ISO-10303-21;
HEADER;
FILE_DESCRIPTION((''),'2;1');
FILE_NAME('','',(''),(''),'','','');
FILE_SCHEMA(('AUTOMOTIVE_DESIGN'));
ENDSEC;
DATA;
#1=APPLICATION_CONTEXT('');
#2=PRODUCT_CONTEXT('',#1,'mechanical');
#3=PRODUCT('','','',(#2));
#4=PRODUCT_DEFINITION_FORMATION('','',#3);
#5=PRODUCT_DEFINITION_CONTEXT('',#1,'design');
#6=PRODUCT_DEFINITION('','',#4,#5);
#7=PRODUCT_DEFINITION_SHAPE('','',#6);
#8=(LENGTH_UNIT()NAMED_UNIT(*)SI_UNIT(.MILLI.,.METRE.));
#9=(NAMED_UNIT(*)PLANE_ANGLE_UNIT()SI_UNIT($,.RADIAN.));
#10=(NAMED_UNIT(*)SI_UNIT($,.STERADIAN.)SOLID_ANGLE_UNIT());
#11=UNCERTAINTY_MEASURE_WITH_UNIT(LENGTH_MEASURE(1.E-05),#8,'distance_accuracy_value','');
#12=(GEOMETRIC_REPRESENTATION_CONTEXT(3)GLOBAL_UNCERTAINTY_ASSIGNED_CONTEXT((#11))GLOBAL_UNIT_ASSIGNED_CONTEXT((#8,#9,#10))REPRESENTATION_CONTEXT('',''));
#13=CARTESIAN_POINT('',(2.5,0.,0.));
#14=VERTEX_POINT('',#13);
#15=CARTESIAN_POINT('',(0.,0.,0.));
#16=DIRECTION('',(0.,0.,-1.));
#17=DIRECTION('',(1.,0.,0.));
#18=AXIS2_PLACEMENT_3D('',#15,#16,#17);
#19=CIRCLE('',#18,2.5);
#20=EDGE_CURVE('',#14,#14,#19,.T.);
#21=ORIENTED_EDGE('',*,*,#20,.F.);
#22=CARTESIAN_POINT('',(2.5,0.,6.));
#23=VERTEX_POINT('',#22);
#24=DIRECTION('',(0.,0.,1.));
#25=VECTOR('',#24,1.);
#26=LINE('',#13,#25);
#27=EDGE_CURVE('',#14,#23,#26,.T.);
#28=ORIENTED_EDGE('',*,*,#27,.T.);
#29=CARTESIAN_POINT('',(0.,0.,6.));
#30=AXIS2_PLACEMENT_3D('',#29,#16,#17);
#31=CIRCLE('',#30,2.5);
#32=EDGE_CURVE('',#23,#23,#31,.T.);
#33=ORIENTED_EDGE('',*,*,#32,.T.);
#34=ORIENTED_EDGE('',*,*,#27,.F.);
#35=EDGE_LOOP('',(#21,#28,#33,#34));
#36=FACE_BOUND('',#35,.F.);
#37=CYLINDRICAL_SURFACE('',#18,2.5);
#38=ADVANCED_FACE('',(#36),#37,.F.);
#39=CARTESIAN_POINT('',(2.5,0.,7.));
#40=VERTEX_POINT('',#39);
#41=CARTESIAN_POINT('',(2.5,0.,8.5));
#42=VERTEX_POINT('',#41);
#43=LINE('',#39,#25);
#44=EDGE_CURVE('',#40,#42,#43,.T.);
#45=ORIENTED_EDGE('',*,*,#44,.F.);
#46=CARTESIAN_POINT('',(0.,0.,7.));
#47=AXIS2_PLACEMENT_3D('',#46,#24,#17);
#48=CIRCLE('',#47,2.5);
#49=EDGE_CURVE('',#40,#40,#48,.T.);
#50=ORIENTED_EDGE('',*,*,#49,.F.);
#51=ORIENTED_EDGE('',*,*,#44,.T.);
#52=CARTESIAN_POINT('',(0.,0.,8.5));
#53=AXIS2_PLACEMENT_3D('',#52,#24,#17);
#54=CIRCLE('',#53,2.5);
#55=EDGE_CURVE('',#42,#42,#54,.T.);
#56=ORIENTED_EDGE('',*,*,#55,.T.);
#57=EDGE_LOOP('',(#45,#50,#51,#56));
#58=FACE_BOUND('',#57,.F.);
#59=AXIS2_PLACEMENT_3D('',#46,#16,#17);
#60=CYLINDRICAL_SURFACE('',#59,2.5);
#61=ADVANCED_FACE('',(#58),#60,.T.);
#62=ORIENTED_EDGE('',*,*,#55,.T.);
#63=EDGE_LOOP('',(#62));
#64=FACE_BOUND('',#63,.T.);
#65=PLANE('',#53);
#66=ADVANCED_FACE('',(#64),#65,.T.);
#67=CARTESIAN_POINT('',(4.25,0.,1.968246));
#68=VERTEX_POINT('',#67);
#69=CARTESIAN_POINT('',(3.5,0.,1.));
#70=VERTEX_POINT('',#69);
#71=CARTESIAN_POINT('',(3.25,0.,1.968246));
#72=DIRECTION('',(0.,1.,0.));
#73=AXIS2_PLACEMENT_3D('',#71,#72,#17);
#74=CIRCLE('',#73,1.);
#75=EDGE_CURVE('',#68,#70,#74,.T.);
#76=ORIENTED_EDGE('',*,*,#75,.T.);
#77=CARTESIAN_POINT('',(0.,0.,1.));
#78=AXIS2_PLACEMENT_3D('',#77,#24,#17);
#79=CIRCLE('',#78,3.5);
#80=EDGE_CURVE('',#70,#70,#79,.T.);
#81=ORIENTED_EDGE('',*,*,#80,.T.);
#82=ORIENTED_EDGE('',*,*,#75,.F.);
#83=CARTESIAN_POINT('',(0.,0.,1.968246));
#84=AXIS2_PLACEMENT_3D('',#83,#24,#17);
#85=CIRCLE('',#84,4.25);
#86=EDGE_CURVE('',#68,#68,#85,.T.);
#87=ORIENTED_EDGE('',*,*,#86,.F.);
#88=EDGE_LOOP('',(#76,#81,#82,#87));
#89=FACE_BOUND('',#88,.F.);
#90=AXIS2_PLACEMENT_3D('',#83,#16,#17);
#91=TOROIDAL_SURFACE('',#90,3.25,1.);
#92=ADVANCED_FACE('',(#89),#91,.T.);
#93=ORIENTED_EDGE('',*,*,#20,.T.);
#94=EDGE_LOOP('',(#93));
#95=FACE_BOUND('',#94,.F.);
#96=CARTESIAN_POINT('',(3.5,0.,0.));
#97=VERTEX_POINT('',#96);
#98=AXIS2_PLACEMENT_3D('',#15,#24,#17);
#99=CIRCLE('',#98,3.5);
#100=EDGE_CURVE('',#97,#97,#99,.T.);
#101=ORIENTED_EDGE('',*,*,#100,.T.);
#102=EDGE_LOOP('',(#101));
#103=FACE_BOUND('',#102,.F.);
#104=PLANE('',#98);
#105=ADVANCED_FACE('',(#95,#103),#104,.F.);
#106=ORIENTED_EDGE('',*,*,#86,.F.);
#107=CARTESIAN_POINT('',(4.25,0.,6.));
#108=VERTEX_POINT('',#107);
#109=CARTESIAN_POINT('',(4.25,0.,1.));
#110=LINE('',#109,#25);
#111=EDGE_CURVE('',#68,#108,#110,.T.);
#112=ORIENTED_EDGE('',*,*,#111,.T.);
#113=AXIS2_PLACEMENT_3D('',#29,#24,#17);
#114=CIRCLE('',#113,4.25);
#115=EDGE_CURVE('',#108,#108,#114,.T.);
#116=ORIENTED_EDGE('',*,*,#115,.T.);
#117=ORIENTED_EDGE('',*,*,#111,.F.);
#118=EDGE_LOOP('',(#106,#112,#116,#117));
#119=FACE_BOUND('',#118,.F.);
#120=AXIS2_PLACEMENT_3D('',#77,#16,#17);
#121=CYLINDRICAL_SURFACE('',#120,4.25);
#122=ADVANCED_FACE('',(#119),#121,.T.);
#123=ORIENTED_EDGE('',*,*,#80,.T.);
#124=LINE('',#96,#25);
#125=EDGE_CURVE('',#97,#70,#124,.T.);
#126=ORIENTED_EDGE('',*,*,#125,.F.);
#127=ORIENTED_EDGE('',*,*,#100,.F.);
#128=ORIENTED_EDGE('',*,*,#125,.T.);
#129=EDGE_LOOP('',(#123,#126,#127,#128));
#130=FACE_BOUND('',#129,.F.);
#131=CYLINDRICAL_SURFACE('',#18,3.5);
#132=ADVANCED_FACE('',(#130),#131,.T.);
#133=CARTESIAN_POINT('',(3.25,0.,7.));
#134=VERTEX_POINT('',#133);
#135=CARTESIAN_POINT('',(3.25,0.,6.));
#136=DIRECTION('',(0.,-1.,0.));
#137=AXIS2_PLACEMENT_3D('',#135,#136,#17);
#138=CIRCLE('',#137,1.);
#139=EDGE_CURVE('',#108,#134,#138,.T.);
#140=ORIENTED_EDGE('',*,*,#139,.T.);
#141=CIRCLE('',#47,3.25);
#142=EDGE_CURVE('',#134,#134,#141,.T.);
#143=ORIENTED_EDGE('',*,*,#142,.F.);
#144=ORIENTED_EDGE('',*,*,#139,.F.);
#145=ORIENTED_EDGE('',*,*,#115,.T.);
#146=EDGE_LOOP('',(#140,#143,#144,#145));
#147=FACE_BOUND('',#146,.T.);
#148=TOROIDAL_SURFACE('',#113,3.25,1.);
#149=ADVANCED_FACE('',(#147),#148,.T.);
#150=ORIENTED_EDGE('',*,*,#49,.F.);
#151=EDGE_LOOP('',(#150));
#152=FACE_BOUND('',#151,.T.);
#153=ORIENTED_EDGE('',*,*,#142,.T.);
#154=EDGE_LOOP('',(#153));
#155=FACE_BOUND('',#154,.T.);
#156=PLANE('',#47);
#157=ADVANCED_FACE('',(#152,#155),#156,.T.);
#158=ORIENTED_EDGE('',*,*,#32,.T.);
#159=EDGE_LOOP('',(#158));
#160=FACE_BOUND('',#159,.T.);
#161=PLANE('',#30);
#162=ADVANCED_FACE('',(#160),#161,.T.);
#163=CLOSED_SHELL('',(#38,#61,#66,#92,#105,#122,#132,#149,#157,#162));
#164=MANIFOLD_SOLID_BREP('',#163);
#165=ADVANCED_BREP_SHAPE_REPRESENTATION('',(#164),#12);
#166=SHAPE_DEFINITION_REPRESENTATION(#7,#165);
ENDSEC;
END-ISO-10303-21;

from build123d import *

# Parameters (mm, degrees)
F0_R     = 3.5
F1_DEPTH = 1
F2_R     = 4.25
F3_DEPTH = 6
F4_R     = 2.5
F5_DEPTH = 1.5
F7_R     = 2.5
F8_DEPTH = 6


# Not quite as in the source:
# - a fillet or chamfer that OpenCascade refuses, or shapes differently, is made with other operations: its cross-section is extruded or revolved along the edge and cut away or added


with BuildPart() as f1:
    # F0 (on Top) → F1 (new body)
    with BuildSketch(Plane.XY):
        Circle(F0_R)
    extrude(amount=F1_DEPTH)

    # F2 (on face) → F3 (join)
    with BuildSketch(Plane.XY.offset(1)):
        Circle(F2_R)
    extrude(amount=F3_DEPTH)

    # F4 (on face) → F5 (join)
    with BuildSketch(Plane.XY.offset(7)):
        Circle(F4_R)
    extrude(amount=F5_DEPTH)

    # F6: fillet of radius 1 on 2 edges, made by hand

    # F6_s1 → F6_t2 (revolve, cut)
    with BuildSketch(Plane.XZ):
        with BuildLine():
            ThreePointArc((4.25, 6), (3.9571067812, 6.7071067812), (3.25, 7))
            Line((3.25, 7), (4.25, 7))
            Line((4.25, 7), (4.25, 6))
        make_face()
    revolve(axis=Axis((0, 0, 7), (0, 0, 1)), mode=Mode.SUBTRACT)

    # F6_s3 → F6_t4 (revolve, cut)
    with BuildSketch(Plane.XZ):
        with BuildLine():
            ThreePointArc((4.25, 1.9682458366), (4.040569415, 1.3558734009), (3.5, 1))
            Line((3.5, 1), (4.25, 1))
            Line((4.25, 1), (4.25, 1.9682458366))
        make_face()
    revolve(axis=Axis((0, 0, 1), (0, 0, 1)), mode=Mode.SUBTRACT)

    # F7 (on face) → F8 (cut)
    with BuildSketch(Plane(origin=(0, 0, 0), x_dir=(1, 0, 0), z_dir=(0, 0, -1))):
        Circle(F7_R)
    extrude(amount=-F8_DEPTH, mode=Mode.SUBTRACT)


solid = f1.part
